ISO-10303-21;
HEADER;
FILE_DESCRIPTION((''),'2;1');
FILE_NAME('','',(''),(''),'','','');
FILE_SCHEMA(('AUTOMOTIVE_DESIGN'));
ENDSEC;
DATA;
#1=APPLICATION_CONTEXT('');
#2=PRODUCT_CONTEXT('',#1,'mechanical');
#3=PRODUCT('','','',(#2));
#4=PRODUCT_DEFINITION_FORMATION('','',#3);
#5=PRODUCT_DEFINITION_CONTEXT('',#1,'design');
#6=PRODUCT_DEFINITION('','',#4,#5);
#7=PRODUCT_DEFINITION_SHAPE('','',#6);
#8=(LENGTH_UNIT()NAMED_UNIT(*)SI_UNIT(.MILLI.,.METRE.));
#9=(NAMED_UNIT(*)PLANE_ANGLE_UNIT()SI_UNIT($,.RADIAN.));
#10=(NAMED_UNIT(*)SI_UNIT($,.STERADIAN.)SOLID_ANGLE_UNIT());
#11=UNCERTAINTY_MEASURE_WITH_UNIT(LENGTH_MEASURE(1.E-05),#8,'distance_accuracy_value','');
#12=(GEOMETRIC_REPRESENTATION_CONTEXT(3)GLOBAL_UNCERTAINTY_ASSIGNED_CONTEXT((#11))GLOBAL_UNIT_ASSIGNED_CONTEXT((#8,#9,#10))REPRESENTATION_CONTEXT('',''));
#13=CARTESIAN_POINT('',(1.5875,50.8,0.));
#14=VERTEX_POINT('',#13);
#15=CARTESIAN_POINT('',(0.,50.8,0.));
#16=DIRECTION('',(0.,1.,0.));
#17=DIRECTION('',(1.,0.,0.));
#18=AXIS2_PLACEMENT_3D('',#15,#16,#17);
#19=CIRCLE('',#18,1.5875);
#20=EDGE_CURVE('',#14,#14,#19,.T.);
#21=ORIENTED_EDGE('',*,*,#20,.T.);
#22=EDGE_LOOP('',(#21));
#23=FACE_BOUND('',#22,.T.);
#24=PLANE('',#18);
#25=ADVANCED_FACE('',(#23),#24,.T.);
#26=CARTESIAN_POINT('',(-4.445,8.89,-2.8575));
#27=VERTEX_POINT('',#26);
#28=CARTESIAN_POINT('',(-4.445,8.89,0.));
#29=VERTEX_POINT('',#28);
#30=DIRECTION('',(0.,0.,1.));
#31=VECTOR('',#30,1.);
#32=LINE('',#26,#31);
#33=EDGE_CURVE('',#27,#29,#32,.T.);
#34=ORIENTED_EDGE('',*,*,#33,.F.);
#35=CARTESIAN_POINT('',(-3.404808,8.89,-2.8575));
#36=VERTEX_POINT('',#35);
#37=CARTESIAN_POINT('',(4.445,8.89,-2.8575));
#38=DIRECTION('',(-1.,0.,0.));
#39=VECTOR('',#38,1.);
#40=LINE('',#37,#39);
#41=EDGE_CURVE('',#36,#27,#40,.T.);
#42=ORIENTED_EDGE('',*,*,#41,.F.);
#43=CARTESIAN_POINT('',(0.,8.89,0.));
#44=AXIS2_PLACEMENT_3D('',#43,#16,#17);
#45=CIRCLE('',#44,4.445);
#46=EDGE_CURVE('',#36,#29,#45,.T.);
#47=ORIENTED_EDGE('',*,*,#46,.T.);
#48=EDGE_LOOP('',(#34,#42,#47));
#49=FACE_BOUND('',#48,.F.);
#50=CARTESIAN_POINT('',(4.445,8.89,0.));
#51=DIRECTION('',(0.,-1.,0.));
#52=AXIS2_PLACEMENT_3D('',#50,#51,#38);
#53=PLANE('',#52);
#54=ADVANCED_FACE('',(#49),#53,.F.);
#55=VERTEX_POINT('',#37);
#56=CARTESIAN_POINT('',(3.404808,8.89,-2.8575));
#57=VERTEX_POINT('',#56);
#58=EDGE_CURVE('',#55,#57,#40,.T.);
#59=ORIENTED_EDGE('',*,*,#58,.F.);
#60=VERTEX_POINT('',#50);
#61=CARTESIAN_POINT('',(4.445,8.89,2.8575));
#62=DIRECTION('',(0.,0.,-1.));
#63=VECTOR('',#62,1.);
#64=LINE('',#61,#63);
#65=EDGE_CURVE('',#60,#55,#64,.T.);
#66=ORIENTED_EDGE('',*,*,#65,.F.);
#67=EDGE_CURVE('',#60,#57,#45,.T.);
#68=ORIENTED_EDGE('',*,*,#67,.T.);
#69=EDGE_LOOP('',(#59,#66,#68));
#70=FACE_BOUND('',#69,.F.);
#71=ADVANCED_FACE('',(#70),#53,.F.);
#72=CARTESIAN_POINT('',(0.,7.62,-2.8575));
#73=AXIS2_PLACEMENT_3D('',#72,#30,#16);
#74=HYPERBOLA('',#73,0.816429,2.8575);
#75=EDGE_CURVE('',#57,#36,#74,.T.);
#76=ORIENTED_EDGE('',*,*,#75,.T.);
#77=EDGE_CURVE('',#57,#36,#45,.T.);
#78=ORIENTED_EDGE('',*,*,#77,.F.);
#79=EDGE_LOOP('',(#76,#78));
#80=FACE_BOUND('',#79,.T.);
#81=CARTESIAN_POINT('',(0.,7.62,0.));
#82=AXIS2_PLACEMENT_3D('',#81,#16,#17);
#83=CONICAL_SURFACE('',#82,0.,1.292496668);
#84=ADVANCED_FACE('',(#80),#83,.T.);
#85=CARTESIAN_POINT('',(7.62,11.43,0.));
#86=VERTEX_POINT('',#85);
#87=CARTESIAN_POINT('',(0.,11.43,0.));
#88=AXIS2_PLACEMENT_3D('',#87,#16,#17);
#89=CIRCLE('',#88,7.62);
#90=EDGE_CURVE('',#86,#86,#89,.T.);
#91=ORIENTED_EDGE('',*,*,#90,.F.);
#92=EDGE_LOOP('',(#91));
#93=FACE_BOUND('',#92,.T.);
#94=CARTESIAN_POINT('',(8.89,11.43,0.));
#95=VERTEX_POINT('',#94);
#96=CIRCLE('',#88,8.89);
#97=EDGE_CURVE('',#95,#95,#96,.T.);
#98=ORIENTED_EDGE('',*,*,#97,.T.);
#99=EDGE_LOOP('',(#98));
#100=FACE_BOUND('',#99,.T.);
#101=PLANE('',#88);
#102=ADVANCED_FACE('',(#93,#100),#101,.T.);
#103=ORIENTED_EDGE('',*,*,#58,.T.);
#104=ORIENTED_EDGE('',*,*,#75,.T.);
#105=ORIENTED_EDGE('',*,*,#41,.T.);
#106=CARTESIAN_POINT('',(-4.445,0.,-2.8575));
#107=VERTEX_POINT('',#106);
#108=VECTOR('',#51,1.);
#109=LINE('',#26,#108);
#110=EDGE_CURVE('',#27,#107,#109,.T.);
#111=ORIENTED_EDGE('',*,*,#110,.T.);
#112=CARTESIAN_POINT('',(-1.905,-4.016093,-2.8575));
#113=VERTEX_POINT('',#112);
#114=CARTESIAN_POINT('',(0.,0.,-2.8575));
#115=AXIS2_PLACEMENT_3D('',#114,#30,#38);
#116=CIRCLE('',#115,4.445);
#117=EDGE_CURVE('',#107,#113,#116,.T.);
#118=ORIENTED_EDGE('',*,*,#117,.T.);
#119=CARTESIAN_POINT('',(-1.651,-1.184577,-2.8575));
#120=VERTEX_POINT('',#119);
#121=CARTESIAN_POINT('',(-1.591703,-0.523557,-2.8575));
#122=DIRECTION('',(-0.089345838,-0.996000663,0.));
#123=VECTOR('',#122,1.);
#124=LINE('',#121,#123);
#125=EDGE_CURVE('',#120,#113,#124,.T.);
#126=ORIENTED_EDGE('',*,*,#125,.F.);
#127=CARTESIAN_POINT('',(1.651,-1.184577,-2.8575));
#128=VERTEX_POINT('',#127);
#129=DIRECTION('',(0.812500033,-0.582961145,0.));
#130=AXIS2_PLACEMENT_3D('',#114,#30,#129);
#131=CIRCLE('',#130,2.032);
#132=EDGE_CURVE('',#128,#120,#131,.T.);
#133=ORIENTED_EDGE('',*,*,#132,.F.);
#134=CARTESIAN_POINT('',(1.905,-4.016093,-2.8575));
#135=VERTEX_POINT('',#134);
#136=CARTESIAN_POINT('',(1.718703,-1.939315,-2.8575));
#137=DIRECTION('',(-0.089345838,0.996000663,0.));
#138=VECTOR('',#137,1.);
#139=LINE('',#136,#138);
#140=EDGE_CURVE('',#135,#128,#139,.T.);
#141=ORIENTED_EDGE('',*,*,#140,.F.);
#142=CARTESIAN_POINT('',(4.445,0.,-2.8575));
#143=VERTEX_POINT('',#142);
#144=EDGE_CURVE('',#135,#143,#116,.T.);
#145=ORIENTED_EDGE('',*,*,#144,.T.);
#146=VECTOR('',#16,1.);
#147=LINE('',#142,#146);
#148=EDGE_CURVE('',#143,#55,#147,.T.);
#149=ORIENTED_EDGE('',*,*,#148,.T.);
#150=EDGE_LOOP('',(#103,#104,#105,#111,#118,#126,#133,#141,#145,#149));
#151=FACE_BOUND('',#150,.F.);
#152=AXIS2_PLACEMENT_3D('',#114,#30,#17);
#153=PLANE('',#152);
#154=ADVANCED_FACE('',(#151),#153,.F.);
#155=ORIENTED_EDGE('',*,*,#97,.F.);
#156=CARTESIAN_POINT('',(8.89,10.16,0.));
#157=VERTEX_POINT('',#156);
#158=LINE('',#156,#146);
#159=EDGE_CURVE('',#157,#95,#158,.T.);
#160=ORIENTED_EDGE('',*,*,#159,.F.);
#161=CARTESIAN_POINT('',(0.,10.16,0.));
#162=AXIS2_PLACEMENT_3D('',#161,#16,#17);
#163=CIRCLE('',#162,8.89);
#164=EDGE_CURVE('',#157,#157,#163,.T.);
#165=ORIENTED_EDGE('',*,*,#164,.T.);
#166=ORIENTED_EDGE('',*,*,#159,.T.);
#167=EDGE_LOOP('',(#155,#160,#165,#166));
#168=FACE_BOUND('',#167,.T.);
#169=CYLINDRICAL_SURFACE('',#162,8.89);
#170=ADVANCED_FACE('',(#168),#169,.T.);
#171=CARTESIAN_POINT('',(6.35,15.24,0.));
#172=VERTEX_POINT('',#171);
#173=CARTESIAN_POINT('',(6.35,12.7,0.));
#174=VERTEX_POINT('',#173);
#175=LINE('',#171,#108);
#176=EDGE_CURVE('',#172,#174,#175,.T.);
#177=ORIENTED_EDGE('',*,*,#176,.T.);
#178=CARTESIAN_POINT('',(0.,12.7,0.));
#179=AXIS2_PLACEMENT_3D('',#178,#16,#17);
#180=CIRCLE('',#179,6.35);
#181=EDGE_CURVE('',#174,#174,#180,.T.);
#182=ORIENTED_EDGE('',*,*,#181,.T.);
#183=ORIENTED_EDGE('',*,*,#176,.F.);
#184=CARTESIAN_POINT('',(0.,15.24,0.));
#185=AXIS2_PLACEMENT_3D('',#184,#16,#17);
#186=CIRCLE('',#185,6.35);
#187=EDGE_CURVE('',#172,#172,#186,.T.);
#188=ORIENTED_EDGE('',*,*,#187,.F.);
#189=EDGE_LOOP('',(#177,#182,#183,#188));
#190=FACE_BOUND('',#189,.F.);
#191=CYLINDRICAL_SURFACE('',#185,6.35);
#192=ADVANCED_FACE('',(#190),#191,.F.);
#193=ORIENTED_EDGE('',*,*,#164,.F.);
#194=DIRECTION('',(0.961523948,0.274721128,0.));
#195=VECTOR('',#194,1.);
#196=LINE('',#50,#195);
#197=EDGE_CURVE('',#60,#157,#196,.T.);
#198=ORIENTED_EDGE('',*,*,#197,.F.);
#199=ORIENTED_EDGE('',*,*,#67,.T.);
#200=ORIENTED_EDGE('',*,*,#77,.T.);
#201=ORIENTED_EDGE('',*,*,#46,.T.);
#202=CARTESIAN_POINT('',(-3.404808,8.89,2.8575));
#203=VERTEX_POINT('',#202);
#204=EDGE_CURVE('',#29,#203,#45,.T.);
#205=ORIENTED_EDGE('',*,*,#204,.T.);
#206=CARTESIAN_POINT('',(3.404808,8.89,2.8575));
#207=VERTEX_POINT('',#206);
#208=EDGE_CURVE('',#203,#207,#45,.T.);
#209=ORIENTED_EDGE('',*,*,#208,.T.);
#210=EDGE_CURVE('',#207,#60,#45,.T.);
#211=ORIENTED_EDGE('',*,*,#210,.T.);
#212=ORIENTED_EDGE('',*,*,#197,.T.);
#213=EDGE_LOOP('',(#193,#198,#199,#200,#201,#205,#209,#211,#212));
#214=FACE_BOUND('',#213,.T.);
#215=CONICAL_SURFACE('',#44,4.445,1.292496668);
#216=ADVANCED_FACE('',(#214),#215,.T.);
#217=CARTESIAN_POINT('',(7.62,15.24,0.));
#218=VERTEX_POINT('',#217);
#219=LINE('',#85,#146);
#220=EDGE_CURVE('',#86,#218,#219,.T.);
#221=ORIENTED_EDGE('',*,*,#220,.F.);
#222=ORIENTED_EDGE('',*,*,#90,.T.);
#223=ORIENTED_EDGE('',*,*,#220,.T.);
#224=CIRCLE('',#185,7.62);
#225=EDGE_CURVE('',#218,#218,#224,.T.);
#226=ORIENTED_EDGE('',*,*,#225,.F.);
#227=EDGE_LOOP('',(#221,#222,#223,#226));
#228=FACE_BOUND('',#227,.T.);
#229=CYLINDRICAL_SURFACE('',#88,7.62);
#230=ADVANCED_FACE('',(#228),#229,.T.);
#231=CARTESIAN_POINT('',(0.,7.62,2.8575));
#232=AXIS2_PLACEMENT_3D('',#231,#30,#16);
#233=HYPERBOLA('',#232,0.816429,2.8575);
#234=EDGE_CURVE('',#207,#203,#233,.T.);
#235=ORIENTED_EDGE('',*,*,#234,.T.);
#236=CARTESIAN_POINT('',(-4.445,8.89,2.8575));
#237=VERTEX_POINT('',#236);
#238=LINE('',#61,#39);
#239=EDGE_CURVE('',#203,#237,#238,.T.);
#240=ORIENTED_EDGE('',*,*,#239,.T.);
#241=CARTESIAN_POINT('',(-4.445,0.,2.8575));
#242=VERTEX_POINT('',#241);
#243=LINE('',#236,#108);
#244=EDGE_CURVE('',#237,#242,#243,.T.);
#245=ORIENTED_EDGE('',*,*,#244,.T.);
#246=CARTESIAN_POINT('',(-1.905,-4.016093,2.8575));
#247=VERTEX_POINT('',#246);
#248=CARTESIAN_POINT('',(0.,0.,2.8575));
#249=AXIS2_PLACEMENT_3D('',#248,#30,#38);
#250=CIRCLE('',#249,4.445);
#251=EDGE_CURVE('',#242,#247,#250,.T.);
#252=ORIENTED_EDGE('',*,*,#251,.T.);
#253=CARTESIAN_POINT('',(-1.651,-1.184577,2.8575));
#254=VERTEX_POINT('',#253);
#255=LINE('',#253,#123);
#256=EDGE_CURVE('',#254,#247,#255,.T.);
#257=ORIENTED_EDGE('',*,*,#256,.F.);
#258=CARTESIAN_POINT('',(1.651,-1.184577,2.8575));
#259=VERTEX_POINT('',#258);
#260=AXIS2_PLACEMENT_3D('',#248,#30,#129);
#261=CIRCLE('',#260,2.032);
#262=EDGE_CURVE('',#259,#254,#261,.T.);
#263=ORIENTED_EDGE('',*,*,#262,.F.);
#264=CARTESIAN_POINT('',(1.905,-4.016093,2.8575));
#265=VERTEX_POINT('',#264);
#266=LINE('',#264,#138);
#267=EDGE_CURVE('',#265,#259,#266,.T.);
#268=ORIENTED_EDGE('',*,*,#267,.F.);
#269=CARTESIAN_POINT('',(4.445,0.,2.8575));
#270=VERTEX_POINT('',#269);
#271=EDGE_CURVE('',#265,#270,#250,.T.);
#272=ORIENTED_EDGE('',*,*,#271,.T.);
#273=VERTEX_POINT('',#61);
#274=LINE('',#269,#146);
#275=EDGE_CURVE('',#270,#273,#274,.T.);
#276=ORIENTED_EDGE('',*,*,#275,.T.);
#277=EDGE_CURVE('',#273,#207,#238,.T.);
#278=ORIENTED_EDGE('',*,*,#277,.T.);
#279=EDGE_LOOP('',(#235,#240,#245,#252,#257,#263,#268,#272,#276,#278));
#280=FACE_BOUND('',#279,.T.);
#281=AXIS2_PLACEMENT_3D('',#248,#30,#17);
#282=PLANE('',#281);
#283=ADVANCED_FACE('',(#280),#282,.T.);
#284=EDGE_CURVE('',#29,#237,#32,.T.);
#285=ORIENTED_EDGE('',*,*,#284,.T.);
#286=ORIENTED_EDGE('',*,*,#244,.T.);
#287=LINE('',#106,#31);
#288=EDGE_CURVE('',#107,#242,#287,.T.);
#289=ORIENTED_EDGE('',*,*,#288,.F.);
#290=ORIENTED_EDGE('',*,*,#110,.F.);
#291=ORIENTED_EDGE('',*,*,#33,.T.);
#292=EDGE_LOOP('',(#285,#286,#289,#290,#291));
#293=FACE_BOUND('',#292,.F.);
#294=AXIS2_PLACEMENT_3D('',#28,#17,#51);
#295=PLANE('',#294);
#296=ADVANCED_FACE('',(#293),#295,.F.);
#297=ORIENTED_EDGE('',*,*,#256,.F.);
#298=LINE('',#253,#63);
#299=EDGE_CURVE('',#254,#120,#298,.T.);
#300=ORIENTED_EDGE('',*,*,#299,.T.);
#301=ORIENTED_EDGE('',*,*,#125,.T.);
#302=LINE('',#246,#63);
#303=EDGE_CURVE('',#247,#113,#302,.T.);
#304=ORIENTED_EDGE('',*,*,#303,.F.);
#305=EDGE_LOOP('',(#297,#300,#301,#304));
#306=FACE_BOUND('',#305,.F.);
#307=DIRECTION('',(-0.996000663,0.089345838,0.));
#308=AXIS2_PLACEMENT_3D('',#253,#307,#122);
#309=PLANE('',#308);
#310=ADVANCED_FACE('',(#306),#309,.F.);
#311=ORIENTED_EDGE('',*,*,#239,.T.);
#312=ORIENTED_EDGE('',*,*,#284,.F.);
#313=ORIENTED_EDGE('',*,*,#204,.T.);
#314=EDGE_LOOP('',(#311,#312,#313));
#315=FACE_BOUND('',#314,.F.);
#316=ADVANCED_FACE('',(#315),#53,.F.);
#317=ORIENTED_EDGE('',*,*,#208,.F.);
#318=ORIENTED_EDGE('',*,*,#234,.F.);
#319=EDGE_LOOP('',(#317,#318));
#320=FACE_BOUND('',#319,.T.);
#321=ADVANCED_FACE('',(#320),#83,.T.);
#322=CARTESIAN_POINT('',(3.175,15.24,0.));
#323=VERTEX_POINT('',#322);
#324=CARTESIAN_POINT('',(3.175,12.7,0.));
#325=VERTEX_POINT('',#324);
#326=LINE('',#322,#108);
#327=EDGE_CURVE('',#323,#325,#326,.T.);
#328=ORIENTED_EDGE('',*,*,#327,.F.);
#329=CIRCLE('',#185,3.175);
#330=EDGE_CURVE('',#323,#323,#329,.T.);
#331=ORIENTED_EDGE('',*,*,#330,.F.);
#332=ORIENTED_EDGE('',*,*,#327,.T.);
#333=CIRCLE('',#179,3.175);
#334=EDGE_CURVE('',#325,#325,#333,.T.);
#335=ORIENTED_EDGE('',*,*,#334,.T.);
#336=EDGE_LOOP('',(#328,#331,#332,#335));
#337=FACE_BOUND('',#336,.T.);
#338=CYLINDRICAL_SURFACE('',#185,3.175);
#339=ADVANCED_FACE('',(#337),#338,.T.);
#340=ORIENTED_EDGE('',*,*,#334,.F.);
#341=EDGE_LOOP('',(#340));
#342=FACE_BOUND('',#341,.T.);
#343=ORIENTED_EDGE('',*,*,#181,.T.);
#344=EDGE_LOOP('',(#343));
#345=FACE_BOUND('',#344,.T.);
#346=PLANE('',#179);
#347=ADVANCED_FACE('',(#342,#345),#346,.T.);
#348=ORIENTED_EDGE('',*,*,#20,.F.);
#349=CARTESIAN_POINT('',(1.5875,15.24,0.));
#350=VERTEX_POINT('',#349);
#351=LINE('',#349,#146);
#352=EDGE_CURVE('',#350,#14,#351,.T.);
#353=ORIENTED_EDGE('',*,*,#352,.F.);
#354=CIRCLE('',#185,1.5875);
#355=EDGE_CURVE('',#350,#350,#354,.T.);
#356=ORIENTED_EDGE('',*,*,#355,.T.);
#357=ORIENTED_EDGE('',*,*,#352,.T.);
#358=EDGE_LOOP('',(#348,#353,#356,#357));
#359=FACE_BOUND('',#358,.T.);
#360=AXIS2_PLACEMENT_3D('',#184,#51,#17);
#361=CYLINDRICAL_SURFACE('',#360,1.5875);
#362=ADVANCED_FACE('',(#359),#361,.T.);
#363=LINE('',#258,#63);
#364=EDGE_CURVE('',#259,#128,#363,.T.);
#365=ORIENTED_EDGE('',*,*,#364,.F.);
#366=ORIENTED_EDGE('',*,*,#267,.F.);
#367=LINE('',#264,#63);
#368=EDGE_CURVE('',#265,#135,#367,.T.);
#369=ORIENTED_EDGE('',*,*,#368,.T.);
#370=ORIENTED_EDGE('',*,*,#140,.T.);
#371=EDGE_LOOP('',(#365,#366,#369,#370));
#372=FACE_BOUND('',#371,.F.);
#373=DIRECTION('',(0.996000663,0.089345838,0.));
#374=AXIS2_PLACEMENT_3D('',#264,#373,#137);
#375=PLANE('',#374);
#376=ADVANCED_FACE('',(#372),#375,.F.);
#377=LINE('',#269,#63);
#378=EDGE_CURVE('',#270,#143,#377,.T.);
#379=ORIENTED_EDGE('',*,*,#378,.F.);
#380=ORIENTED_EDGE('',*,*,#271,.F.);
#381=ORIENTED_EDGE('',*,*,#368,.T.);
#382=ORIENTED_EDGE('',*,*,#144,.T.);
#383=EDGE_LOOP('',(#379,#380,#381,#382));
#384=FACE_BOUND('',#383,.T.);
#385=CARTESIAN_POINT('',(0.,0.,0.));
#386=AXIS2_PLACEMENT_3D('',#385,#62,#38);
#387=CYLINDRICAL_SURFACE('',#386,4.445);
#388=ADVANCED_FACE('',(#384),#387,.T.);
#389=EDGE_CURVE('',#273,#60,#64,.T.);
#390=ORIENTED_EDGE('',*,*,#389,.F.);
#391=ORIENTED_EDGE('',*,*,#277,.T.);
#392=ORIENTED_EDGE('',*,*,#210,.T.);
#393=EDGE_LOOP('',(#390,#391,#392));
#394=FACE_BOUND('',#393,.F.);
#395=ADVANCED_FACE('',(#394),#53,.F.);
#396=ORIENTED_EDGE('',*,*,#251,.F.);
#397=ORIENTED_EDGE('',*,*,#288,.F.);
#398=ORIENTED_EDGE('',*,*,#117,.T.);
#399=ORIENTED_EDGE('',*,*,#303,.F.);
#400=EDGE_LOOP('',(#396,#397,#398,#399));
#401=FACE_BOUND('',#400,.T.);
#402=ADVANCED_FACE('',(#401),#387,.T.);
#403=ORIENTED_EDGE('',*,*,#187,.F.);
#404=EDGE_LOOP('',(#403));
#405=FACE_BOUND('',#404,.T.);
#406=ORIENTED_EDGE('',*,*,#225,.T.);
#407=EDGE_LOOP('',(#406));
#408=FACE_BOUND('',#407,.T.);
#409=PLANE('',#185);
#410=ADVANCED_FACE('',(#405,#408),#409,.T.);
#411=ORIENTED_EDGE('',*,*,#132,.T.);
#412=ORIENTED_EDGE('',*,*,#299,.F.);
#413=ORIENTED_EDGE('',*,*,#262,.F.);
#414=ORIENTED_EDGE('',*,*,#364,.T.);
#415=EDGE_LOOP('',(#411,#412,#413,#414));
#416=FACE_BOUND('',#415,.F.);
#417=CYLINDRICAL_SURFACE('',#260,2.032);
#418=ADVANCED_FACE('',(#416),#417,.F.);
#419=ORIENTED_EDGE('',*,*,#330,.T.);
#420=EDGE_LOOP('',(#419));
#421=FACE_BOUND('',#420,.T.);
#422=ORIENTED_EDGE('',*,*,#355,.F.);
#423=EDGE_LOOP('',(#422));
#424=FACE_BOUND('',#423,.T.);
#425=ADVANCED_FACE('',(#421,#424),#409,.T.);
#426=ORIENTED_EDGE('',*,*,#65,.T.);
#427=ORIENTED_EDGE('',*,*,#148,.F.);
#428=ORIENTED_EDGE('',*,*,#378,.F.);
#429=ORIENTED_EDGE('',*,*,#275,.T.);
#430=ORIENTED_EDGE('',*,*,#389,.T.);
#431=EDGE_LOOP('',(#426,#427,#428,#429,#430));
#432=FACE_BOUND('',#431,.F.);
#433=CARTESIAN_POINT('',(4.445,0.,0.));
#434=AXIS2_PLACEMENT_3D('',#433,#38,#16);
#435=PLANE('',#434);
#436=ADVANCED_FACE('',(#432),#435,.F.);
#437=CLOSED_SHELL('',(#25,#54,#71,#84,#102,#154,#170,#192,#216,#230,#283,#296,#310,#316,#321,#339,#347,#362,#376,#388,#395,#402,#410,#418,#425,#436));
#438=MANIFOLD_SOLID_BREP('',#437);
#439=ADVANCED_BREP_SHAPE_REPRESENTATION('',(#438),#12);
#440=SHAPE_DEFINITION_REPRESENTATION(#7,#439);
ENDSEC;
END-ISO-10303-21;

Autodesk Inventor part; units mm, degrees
ref_plane "YZ Plane" through (0, 0, 0) normal (1, 0, 0) x (0, 1, 0)
ref_plane "XZ Plane" through (0, 0, 0) normal (0, 1, 0) x (-1, 0, 0)
ref_plane "XY Plane" through (0, 0, 0) normal (0, 0, 1) x (1, 0, 0)
sketch "Sketch1" plane through (0, 0, 0) normal (0, 0, 1) x (1, 0, 0)
  arc A0 (-4.445, 0) -> (4.445, 0) centre (0, 0) ccw
  line L0 (-4.445, 0) -> (-4.445, 8.89)
  line L1 (-4.445, 8.89) -> (4.445, 8.89)
  line L2 (4.445, 8.89) -> (4.445, 0)
  arc A1 (4.445, 0) -> (-4.445, 0) centre (0, 0) ccw construction
  dimension "d0" = 8.89
  dimension "d1" = 8.89
sketch "Sketch1 outline for Extrusion1" plane through (0, 0, 0) normal (0, 0, 1) x (1, 0, 0)
  line L0 (-4.445, 8.89) -> (-4.445, 0)
  line L1 (4.445, 8.89) -> (-4.445, 8.89)
  line L2 (4.445, 0) -> (4.445, 8.89)
  arc A0 (-4.445, 0) -> (4.445, 0) centre (0, 0) ccw
extrude "Extrusion1" add sketch "Sketch1 outline for Extrusion1" along normal mid plane 5.715
sketch "Sketch2" plane through (0, 0, 2.8575) normal (0, 0, 1) x (1, 0, 0)
  arc A0 (1.651, -1.184577) -> (-1.651, -1.184577) centre (0, 0) ccw
  line L0 (1.651, -1.184577) -> (1.905, -4.016093)
  line L1 (0, 0) -> (0, -4.445) construction
  line L2 (-1.651, -1.184577) -> (-1.905, -4.016093)
  arc A1 (0, -2.032) -> (1.651, -1.184577) centre (0, 0) ccw construction
  arc A2 (-1.651, -1.184577) -> (0, -2.032) centre (0, 0) ccw construction
  arc A3 (-4.445, 0) -> (4.445, 0) centre (0, 0) ccw
  dimension "d4" = 4.064
  dimension "d5" = 3.81
  dimension "d6" = 3.302
sketch "Sketch2 outline for Extrusion2" plane through (0, 0, 2.8575) normal (0, 0, 1) x (1, 0, 0)
  line L0 (1.905, -4.016093) -> (1.651, -1.184577)
  arc A0 (-1.905, -4.016093) -> (1.905, -4.016093) centre (0, 0) ccw
  line L1 (-1.651, -1.184577) -> (-1.905, -4.016093)
  arc A1 (1.651, -1.184577) -> (-1.651, -1.184577) centre (0, 0) ccw
extrude "Extrusion2" cut sketch "Sketch2 outline for Extrusion2" against normal through all
sketch "Sketch3" plane through (0, 0, 0) normal (0, 0, 1) x (1, 0, 0)
  line L0 (4.445, 8.89) -> (-4.445, 8.89)
  line L1 (0, 7.62) -> (4.445, 8.89)
  line L2 (4.445, 8.89) -> (8.89, 10.16)
  line L3 (8.89, 10.16) -> (8.89, 11.43)
  line L4 (8.89, 11.43) -> (7.62, 11.43)
  line L5 (7.62, 11.43) -> (7.62, 15.24)
  line L6 (7.62, 15.24) -> (0, 15.24)
  line L7 (0, 15.24) -> (0, 7.62)
  line L8 (0, 0) -> (0, 8.89) construction
  line L9 (0, -7.867311) -> (0, 19.091219)
  dimension "d9" = 8.89
  dimension "d10" = 6.35
  dimension "d11" = 3.81
  dimension "d12" = 1.27
  dimension "d13" = 1.27
sketch "Sketch3 outline for Revolution1" plane through (0, 0, 0) normal (0, 0, 1) x (1, 0, 0)
  line L0 (0, 15.24) -> (0, 7.62)
  line L1 (7.62, 15.24) -> (0, 15.24)
  line L2 (7.62, 11.43) -> (7.62, 15.24)
  line L3 (8.89, 11.43) -> (7.62, 11.43)
  line L4 (8.89, 10.16) -> (8.89, 11.43)
  line L5 (4.445, 8.89) -> (8.89, 10.16)
  line L6 (0, 7.62) -> (4.445, 8.89)
revolve "Revolution1" add sketch "Sketch3 outline for Revolution1" angle 360 about axis through (0, -10, 0) along (0, 1, 0)
sketch "Sketch4" plane through (0, 15.24, 0) normal (0, 1, 0) x (1, 0, 0)
  circle A0 centre (0, 0) radius 3.175
  circle A1 centre (0, 0) radius 7.62 projected
  circle A2 centre (0, 0) radius 6.35
  dimension "d15" = 6.35
  dimension "d16" = 1.27
sketch "Sketch4 outline for Extrusion3" plane through (0, 15.24, 0) normal (0, 1, 0) x (1, 0, 0)
  circle A0 centre (0, 0) radius 6.35
  circle A1 centre (0, 0) radius 3.175
extrude "Extrusion3" cut sketch "Sketch4 outline for Extrusion3" against normal blind 2.54
sketch "Sketch5" plane through (0, 15.24, 0) normal (0, 1, 0) x (1, 0, 0)
  circle A0 centre (0, 0) radius 1.5875
  dimension "d19" = 3.175
sketch "Sketch5 outline for Extrusion4" plane through (0, 15.24, 0) normal (0, 1, 0) x (1, 0, 0)
  circle A0 centre (0, 0) radius 1.5875
extrude "Extrusion4" add sketch "Sketch5 outline for Extrusion4" along normal blind 35.56
properties part number "Bottom"
